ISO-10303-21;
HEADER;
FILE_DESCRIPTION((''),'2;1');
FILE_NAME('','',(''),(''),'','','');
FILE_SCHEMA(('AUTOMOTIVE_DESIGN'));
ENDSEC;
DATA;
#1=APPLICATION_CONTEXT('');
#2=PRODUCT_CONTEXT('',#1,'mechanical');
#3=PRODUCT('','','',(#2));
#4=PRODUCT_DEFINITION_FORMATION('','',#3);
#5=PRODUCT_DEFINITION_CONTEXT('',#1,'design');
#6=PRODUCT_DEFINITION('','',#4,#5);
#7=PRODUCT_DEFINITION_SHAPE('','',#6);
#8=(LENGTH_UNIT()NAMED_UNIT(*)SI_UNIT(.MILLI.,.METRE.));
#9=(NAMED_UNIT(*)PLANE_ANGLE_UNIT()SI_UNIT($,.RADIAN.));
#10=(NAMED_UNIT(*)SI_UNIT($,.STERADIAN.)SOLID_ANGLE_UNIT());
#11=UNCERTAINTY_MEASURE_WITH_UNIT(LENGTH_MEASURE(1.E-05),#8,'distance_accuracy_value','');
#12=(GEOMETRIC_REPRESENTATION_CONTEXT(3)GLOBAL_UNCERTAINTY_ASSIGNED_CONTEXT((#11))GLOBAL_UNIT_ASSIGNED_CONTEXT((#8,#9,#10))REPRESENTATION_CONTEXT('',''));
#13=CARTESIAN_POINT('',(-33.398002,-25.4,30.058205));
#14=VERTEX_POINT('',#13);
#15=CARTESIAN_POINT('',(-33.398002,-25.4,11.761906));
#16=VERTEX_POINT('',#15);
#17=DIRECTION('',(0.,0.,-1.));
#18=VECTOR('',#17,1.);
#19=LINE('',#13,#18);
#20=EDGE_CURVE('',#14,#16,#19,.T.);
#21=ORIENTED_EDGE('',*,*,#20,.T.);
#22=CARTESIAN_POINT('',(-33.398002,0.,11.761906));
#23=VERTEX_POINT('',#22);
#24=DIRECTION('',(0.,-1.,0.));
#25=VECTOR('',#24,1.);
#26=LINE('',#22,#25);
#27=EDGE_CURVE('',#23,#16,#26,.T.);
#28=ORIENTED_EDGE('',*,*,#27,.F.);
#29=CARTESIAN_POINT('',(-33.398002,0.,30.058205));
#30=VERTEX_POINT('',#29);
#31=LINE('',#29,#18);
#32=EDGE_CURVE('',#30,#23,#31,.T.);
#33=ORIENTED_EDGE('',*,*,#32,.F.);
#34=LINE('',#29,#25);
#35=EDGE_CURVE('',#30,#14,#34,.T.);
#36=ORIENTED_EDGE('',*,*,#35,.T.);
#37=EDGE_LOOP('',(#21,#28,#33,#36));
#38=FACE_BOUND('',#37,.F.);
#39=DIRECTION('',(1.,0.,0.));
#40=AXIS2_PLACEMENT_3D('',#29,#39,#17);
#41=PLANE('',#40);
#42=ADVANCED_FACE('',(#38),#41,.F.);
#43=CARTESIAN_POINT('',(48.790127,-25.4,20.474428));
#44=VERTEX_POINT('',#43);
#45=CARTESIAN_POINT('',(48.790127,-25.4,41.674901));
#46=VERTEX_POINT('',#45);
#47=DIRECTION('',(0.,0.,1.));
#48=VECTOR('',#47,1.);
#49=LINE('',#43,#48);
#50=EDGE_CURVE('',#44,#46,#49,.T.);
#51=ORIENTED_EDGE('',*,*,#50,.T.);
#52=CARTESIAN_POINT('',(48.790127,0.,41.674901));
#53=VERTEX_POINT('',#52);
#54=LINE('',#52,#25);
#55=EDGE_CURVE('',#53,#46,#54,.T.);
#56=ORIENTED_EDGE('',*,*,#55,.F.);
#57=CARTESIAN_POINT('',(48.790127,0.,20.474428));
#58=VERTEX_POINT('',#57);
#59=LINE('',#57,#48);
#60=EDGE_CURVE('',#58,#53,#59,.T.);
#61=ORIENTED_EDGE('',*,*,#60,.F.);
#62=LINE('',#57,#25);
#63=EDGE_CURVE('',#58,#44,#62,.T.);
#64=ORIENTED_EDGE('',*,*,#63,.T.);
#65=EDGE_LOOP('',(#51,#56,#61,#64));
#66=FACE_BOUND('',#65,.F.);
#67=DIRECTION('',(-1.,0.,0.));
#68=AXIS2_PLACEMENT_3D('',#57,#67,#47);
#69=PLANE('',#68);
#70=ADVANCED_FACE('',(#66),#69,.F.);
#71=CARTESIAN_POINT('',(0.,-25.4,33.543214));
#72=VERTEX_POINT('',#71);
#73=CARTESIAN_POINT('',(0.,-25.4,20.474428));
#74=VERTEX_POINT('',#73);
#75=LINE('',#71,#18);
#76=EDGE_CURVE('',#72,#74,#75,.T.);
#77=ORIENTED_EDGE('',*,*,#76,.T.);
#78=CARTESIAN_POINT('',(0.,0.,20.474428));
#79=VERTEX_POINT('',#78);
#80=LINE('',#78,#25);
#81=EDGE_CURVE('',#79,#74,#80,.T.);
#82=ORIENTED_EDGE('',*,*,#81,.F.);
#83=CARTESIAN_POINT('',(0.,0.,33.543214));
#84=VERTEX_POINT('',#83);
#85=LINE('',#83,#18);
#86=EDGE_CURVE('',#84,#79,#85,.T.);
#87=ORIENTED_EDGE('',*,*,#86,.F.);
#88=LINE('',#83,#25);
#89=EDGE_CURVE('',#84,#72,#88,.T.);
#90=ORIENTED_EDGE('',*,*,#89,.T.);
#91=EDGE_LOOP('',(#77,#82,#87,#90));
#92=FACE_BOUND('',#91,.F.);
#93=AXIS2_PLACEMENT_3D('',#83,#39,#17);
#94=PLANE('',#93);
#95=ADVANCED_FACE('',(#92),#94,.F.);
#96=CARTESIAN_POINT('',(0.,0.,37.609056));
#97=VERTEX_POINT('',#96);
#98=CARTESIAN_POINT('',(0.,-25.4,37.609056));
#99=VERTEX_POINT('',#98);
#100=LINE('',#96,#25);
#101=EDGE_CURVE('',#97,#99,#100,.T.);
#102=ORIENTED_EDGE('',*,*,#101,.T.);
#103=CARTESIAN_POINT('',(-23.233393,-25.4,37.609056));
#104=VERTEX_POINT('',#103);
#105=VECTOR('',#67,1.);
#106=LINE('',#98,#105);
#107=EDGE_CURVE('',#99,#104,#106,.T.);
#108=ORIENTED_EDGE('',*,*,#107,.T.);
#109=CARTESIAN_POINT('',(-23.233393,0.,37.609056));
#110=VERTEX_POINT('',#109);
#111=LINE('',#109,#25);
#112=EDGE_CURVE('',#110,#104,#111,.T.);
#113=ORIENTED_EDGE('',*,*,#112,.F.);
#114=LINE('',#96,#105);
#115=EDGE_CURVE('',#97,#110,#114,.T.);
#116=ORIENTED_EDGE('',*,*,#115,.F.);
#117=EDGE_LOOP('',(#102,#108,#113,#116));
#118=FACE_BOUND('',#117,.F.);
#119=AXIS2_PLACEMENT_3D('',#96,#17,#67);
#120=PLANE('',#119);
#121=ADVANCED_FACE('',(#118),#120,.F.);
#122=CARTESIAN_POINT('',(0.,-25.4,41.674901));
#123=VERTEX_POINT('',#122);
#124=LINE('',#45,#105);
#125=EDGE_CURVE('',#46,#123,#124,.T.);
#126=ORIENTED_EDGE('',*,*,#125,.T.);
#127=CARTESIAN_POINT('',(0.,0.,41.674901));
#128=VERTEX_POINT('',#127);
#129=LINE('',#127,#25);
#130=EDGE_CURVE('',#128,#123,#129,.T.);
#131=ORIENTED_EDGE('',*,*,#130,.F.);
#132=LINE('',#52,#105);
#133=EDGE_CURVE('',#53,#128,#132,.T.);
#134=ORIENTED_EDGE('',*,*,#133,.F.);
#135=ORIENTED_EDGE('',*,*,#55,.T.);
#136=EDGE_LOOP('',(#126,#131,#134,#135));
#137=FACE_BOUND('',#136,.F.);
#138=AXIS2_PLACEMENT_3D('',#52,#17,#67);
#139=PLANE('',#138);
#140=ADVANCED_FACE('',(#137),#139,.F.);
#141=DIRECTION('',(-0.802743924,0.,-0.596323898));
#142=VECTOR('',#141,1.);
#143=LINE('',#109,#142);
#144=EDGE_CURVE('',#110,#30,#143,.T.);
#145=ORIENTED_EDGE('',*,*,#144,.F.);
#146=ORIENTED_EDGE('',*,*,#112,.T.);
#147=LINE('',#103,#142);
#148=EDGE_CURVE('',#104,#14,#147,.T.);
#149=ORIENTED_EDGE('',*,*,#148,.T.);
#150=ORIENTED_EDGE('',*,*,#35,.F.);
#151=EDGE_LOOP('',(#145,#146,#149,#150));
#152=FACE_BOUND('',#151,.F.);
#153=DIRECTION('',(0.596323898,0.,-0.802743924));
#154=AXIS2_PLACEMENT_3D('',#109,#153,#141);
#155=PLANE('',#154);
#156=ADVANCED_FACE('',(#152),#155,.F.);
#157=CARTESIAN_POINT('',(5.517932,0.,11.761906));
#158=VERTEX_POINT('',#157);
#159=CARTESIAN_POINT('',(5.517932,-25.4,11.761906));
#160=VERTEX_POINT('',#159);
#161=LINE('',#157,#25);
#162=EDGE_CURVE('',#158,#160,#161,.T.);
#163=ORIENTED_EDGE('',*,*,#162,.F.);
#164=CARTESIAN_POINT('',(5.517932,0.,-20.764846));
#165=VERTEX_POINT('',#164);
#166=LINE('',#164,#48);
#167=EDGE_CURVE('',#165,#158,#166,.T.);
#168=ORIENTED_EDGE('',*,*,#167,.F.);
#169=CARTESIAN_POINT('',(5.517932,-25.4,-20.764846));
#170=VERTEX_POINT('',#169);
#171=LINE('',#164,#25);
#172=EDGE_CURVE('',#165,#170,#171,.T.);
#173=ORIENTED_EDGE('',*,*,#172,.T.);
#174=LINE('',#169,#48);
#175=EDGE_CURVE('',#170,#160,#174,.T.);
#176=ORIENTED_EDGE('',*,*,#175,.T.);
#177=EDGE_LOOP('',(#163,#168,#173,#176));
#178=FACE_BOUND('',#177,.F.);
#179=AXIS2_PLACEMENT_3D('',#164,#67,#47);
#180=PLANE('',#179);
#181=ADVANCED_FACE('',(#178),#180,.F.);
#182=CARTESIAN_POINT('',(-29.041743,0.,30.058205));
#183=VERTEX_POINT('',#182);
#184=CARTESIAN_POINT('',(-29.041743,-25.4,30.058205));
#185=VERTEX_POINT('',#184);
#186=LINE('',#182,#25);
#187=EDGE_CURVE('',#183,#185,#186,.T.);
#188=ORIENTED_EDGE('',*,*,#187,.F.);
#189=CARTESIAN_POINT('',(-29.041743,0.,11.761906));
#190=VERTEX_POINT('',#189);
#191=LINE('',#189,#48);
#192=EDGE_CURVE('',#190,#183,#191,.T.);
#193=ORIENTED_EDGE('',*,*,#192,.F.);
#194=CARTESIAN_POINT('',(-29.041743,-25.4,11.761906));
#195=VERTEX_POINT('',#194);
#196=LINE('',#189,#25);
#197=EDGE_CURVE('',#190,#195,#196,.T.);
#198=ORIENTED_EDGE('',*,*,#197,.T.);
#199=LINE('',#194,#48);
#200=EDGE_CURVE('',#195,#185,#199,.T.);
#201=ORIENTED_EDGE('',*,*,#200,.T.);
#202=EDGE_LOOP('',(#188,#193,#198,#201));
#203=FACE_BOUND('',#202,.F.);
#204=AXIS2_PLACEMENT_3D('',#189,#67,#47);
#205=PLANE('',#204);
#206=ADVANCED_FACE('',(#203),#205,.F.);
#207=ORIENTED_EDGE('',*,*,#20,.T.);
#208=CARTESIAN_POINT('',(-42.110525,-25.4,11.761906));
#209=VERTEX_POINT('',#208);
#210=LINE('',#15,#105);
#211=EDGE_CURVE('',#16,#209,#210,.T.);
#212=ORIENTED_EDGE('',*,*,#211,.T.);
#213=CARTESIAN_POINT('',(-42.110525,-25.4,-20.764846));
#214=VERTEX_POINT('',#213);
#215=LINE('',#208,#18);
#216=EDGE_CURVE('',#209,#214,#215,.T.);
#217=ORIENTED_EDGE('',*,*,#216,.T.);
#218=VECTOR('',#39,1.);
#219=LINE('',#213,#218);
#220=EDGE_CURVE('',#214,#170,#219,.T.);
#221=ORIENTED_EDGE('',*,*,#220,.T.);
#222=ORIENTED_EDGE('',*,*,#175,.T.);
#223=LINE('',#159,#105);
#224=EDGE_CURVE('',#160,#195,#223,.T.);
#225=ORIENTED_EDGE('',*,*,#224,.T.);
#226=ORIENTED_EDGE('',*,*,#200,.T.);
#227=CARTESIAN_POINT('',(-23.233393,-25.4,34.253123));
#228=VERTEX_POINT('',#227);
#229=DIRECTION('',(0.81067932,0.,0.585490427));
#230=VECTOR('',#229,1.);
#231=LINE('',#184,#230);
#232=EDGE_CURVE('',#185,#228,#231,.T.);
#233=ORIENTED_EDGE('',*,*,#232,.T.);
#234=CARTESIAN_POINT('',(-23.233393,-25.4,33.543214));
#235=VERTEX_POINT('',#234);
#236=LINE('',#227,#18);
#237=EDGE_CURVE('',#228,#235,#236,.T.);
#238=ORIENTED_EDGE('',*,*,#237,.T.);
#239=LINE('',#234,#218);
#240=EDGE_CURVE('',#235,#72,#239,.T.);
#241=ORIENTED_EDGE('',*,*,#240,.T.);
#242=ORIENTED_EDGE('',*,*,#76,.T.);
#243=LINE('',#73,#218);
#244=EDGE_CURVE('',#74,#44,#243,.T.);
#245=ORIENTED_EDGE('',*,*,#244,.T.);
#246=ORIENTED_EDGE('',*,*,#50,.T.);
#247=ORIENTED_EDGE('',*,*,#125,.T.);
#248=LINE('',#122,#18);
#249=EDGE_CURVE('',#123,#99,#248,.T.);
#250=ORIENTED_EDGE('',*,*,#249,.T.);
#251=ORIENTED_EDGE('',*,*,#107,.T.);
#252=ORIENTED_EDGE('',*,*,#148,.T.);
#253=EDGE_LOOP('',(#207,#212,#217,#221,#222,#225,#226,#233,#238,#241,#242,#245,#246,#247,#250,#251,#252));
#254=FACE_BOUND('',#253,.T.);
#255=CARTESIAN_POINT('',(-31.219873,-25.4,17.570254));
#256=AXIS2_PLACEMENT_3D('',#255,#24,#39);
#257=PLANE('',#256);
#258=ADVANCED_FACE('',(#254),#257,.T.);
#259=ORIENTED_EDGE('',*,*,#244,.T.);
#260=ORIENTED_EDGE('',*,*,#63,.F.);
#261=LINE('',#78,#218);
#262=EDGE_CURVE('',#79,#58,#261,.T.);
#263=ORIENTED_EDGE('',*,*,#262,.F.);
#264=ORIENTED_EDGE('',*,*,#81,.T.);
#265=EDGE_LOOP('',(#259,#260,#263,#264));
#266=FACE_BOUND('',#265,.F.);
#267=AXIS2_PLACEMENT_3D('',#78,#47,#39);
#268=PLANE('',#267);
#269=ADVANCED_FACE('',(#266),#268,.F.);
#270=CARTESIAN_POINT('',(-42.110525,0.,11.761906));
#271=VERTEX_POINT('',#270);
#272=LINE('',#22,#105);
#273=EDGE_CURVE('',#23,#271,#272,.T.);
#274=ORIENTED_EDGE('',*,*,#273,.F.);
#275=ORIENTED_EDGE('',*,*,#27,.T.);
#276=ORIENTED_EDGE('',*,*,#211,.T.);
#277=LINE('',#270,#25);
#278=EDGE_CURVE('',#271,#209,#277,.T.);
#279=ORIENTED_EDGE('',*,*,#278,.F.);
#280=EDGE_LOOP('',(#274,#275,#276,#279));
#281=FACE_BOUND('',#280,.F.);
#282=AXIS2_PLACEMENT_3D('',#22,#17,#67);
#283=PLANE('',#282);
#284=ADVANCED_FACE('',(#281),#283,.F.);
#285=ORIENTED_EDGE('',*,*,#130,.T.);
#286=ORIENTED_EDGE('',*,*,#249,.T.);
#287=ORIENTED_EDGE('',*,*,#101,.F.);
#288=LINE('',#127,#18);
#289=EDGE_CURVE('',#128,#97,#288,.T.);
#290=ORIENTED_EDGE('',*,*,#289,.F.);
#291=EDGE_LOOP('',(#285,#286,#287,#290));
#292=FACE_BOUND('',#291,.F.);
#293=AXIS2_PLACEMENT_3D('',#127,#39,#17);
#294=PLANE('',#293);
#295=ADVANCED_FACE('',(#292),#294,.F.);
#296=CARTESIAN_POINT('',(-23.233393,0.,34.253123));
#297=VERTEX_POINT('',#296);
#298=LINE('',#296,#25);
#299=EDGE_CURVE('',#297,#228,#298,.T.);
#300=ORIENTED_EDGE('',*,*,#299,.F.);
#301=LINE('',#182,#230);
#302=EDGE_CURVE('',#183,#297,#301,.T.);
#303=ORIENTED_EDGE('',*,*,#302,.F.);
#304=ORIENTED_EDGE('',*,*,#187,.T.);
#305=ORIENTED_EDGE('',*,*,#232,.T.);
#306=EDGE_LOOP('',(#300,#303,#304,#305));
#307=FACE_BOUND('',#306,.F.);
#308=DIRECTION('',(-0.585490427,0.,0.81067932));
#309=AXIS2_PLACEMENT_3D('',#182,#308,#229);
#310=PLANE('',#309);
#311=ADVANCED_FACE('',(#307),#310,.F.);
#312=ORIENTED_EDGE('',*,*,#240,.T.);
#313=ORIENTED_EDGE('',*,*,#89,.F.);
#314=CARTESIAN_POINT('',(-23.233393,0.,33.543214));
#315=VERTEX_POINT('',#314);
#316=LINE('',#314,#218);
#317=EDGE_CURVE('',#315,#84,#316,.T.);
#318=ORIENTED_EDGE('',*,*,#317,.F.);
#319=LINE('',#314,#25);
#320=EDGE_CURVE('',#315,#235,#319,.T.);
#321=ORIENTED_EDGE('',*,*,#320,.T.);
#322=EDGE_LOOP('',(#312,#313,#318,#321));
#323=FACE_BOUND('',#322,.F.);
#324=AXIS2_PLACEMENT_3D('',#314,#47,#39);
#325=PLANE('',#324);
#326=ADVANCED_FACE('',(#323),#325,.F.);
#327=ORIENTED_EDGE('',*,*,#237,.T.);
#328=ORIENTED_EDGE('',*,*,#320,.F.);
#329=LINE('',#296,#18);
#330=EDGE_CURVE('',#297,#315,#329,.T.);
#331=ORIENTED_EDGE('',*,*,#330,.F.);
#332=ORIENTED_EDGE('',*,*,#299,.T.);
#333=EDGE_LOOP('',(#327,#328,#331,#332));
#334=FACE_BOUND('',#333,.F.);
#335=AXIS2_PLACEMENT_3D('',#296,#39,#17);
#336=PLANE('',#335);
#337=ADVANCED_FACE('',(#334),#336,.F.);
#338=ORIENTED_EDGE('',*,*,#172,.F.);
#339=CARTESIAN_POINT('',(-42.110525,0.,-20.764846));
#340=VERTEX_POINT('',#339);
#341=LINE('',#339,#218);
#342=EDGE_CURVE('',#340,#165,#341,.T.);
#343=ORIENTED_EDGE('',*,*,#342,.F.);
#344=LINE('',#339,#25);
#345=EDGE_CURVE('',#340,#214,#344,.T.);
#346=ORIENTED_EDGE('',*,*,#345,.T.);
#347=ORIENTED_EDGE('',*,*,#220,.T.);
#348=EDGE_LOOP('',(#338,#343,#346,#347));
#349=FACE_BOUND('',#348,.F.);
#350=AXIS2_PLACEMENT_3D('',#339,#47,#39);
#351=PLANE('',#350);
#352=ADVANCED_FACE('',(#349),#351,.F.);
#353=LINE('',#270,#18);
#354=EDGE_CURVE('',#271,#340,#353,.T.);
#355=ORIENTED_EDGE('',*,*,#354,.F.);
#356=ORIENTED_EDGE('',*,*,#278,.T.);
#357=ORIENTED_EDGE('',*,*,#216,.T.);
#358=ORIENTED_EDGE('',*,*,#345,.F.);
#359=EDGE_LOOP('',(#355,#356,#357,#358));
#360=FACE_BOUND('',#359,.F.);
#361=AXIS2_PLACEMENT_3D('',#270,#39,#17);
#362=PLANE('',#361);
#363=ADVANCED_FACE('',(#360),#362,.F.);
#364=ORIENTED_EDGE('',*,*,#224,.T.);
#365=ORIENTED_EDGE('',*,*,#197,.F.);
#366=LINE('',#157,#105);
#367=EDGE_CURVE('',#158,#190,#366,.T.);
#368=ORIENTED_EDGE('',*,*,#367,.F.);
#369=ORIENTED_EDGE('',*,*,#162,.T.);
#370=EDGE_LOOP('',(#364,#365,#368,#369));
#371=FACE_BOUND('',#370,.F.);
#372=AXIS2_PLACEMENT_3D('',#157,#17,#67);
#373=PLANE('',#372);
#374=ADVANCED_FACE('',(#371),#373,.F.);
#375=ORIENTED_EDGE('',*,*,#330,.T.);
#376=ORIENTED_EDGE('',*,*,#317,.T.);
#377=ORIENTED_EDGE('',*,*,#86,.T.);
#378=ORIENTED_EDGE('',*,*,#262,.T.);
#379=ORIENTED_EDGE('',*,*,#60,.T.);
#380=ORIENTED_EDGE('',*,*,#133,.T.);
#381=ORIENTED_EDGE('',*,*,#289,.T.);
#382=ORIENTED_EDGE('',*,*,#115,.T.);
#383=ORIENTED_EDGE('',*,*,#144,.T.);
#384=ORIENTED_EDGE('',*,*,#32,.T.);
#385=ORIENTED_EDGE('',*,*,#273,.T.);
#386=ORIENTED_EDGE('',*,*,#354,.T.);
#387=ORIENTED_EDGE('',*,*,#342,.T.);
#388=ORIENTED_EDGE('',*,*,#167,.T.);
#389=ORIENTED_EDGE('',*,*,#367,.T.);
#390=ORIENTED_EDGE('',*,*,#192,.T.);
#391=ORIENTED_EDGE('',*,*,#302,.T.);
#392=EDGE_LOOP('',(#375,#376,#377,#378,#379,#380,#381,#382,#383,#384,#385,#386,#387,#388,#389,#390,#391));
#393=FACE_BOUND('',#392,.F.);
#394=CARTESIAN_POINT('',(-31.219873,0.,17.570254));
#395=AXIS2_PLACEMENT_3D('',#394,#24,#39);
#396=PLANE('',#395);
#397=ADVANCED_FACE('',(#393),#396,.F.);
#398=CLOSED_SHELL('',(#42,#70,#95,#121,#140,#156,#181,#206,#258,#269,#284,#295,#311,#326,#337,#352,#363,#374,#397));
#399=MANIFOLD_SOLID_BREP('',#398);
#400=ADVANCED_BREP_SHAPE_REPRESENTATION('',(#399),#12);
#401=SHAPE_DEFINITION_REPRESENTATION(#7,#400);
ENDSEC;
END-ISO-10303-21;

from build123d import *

# Parameters (mm, degrees)
F0_W     = 4.3562594801
F0_H     = 11.6166975349
F0_H_2   = 6.6796019673
F0_W_2   = 8.1316875294
F0_H_3   = 4.0658414364
F0_H_4   = 2.6137568057
F1_DEPTH = 25.4


with BuildPart() as f1:
    # F0 (on Front) → F1 (new body)
    with BuildSketch(Plane.XZ):
        with Locations((-31.219872646, 17.5702543929)):
            Rectangle(F0_W, F0_H)
        Polygon((-33.3980023861, 11.7619056255), (-42.1105250716, 11.7619056255), (-42.1105250716, -20.7648463547), (5.517931655, -20.7648463547), (5.517931655, 11.7619056255), (-29.041742906, 11.7619056255), (-29.041742906, 9.1481488198), (-33.3980023861, 9.1481488198), align=None)
        Polygon((0, 41.6749008), (0, 37.6090556383), (8.1316875294, 37.6090556383), (8.1316875294, 33.5432142019), (0, 33.5432142019), (0, 20.474428311), (48.790127039, 20.474428311), (48.790127039, 41.6749008), align=None)
        Polygon((-18.5867156833, 37.6090556383), (-23.2333932072, 34.2531229749), (-23.2333932072, 33.5432142019), (0, 33.5432142019), (0, 37.6090556383), align=None)
        with Locations((-31.219872646, 26.718404144)):
            Rectangle(F0_W, F0_H_2)
        with Locations((4.0658437647, 35.5761349201)):
            Rectangle(F0_W_2, F0_H_3)
        Polygon((-23.2333932072, 37.6090556383), (-33.3980023861, 30.0582051277), (-29.041742906, 30.0582051277), (-23.2333932072, 34.2531229749), align=None)
        with Locations((-31.219872646, 10.4550272226)):
            Rectangle(F0_W, F0_H_4)
        Polygon((-18.5867156833, 37.6090556383), (-23.2333932072, 37.6090556383), (-23.2333932072, 34.2531229749), align=None)
    extrude(amount=F1_DEPTH)


solid = f1.part
